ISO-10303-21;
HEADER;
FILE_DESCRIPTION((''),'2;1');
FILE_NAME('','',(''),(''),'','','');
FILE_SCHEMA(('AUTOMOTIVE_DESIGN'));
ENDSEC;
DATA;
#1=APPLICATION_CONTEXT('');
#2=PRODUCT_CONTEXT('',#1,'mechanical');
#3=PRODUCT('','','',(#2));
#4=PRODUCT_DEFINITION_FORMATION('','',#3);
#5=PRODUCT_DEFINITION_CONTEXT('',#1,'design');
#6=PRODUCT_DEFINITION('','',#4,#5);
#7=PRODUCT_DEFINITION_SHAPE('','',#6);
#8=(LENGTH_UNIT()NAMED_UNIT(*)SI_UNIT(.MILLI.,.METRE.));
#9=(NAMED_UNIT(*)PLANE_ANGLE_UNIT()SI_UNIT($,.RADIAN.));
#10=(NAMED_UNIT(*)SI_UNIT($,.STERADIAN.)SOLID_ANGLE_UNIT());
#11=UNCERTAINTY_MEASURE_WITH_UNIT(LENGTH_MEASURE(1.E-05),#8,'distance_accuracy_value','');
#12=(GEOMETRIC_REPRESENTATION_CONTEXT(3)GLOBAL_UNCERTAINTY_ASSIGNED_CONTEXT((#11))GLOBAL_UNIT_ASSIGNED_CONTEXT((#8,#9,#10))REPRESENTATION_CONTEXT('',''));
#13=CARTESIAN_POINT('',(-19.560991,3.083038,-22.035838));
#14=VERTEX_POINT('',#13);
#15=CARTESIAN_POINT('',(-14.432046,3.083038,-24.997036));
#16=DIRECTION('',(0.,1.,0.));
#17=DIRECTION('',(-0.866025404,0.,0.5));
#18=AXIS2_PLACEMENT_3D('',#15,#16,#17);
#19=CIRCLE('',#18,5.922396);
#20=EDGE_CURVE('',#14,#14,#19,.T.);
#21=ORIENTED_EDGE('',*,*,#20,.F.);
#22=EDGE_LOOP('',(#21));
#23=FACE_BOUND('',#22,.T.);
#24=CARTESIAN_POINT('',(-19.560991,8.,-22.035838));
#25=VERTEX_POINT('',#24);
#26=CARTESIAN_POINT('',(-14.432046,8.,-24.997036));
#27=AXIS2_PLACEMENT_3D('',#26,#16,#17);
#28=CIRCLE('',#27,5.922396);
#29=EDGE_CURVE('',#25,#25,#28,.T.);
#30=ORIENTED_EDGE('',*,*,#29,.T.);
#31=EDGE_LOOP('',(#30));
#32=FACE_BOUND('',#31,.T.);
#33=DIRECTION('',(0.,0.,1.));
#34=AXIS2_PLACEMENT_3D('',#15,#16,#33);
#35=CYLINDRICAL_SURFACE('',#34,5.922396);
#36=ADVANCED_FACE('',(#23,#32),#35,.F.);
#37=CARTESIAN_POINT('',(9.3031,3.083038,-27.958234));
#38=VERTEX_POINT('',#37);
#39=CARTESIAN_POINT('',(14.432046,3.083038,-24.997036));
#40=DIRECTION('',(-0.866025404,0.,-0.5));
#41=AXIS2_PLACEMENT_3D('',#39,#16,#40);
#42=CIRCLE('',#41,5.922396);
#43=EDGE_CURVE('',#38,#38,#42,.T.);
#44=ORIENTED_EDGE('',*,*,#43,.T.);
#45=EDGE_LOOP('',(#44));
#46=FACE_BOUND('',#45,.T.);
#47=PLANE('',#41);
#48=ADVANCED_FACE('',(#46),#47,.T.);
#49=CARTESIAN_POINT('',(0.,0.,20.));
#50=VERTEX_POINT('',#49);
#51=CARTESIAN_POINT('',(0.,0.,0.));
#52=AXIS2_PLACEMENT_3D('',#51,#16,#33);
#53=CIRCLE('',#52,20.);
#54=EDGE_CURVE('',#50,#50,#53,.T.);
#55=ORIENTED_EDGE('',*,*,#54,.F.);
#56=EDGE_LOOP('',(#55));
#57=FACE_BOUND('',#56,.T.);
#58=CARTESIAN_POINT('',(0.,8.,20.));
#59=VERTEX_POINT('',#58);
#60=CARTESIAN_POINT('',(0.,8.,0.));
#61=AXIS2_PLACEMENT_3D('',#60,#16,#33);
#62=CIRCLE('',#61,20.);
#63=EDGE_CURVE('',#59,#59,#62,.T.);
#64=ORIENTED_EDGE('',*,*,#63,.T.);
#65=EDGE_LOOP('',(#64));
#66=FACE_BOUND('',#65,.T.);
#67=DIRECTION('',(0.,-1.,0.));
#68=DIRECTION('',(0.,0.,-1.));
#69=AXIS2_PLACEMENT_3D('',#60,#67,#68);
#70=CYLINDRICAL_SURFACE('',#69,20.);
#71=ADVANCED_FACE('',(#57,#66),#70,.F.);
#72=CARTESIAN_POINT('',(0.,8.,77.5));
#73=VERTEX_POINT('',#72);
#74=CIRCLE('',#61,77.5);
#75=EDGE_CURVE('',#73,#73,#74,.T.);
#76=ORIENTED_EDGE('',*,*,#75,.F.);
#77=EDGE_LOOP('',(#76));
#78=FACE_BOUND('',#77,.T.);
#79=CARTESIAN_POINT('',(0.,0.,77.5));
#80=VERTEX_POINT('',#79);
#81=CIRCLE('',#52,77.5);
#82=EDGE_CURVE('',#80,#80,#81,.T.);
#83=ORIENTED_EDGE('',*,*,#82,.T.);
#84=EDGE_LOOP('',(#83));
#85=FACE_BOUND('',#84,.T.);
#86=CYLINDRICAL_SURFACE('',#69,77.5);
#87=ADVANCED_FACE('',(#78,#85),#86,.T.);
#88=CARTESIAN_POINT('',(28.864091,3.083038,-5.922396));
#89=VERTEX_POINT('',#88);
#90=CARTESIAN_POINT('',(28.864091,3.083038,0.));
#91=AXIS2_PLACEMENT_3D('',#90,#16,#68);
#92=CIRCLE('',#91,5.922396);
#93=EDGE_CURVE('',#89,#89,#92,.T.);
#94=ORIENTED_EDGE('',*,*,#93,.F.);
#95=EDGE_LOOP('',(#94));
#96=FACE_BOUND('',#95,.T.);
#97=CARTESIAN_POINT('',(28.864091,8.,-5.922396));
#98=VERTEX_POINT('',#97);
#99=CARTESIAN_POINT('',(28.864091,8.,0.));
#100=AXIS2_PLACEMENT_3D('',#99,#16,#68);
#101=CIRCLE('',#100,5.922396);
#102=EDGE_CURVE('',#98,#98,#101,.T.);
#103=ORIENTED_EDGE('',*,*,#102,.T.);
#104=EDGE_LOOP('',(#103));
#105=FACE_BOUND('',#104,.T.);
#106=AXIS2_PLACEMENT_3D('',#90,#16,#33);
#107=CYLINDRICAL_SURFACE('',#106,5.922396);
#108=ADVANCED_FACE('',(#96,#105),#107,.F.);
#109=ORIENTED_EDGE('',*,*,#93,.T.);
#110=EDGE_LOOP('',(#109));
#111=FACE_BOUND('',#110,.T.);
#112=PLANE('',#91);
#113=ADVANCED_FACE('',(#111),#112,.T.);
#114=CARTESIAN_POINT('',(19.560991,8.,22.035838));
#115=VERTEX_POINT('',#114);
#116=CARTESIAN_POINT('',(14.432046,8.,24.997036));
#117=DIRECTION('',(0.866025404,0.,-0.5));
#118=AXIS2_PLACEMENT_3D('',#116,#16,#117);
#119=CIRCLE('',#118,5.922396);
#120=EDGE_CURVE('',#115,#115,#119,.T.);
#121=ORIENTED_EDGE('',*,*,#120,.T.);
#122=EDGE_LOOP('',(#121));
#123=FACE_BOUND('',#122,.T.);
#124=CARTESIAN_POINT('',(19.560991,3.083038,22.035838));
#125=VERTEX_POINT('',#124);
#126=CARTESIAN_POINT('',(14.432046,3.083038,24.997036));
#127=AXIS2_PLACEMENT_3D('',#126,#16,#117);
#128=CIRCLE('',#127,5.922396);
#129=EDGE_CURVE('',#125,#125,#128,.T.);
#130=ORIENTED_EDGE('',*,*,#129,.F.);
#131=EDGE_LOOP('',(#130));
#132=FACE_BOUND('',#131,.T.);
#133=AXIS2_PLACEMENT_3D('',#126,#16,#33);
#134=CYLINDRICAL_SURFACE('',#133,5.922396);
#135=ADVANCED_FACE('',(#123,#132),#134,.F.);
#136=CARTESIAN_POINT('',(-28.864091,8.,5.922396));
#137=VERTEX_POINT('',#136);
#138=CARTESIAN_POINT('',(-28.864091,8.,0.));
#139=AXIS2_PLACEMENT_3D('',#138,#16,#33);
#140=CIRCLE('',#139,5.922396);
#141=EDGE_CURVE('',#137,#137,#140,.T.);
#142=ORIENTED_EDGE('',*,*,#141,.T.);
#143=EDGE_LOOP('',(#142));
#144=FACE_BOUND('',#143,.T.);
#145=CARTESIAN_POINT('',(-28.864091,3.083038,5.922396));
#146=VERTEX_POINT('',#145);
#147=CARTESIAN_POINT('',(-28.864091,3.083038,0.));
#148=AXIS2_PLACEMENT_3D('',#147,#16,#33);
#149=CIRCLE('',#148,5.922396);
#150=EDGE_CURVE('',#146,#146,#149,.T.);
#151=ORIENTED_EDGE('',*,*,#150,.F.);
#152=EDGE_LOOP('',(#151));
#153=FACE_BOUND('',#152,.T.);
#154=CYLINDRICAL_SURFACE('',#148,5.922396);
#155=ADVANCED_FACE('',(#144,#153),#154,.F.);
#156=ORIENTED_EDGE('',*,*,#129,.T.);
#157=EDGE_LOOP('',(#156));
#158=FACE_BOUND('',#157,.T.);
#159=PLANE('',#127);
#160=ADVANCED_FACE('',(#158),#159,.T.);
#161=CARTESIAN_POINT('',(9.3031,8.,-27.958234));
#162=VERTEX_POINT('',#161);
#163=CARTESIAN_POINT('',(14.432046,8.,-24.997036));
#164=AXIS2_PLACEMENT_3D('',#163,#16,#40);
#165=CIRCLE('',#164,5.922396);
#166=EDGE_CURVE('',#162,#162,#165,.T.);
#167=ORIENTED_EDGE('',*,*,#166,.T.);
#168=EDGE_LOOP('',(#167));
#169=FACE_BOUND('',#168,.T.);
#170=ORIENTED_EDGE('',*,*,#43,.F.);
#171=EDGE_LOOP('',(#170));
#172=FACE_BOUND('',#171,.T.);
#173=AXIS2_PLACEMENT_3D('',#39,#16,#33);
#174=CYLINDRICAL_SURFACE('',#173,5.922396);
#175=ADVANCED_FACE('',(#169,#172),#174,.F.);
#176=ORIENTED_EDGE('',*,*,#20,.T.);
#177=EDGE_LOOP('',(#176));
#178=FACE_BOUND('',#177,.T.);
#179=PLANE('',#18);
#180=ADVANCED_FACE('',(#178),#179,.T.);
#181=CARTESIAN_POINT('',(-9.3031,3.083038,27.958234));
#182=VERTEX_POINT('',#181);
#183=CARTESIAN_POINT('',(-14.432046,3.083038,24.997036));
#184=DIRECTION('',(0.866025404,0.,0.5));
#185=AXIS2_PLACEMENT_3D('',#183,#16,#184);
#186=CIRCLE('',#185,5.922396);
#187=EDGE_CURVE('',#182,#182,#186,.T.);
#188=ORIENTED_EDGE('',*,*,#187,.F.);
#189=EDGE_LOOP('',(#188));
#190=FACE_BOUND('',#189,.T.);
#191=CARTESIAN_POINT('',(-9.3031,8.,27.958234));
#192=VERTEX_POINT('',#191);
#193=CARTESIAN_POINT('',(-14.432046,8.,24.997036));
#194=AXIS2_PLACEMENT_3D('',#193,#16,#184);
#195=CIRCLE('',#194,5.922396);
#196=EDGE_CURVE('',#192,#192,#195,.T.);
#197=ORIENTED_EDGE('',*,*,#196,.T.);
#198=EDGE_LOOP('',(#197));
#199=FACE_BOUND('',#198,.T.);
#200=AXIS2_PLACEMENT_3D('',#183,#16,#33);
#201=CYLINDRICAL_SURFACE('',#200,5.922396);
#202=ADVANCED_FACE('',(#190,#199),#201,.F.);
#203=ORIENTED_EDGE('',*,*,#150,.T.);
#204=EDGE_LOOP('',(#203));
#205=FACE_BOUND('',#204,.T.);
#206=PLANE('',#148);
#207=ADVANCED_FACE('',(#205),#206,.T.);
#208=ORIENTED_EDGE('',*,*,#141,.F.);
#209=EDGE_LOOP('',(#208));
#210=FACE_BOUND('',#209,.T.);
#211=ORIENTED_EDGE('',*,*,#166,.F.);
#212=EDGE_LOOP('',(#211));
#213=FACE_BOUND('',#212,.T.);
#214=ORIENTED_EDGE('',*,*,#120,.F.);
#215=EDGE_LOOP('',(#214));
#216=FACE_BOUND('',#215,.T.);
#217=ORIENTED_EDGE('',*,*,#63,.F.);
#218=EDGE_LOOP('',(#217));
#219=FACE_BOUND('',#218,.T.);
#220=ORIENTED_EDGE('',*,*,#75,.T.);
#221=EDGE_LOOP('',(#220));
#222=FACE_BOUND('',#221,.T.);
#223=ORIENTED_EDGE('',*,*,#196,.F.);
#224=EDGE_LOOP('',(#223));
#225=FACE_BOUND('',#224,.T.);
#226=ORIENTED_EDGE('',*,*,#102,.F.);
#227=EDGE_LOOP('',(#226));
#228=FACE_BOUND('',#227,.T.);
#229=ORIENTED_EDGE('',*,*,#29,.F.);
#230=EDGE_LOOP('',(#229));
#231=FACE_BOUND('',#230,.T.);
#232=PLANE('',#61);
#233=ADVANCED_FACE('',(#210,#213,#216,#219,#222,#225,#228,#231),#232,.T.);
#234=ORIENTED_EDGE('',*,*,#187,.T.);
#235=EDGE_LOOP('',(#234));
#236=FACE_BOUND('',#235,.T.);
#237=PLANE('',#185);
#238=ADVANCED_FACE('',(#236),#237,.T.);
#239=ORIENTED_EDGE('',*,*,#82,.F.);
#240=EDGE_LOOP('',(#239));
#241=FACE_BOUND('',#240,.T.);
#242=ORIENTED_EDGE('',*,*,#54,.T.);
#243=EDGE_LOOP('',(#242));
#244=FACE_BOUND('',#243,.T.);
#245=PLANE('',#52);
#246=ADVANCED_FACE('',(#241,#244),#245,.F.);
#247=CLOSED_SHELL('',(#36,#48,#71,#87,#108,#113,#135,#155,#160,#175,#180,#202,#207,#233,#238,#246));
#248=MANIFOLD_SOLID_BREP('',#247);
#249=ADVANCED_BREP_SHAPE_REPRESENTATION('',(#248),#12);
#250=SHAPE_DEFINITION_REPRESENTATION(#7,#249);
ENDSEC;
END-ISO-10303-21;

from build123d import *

# Parameters (mm, degrees)
SKETCH1_R           = 77.5
BOSS_EXTRUDE1_DEPTH = 8
SKETCH2_R           = 20
CUT_EXTRUDE1_DEPTH  = 110.893129904
SKETCH3_R           = 5.922396099
CUT_EXTRUDE2_DEPTH  = 4.916962148
CIRPATTERN1_COUNT   = 6


with BuildPart() as part:
    # Sketch1 → Boss-Extrude1 (new body)
    with BuildSketch(Plane(origin=(0, 0, 0), x_dir=(1, 0, 0), z_dir=(0, 1, 0))):
        Circle(SKETCH1_R)
    extrude(amount=BOSS_EXTRUDE1_DEPTH)

    # Sketch2 → Cut-Extrude1 (cut, through all)
    with BuildSketch(Plane(origin=(0, 0, 0), x_dir=(1, 0, 0), z_dir=(0, 1, 0))):
        Circle(SKETCH2_R)
    extrude(amount=CUT_EXTRUDE1_DEPTH, mode=Mode.SUBTRACT)

    # Sketch3 → Cut-Extrude2 (cut)
    with BuildSketch(Plane(origin=(0, 8, 0), x_dir=(1, 0, 0), z_dir=(0, 1, 0))):
        with Locations((-28.864091446, 0)):
            Circle(SKETCH3_R)
    cut_extrude2 = extrude(amount=-CUT_EXTRUDE2_DEPTH, mode=Mode.SUBTRACT)

    # CirPattern1: Cut-Extrude2 ×6 about axis
    cirpattern1_axis = Axis((0, 0, 0), (0, 1, 0))
    for i in range(1, CIRPATTERN1_COUNT):
        add(cut_extrude2.rotate(cirpattern1_axis, i * 360 / CIRPATTERN1_COUNT), mode=Mode.SUBTRACT)


solid = part.part
